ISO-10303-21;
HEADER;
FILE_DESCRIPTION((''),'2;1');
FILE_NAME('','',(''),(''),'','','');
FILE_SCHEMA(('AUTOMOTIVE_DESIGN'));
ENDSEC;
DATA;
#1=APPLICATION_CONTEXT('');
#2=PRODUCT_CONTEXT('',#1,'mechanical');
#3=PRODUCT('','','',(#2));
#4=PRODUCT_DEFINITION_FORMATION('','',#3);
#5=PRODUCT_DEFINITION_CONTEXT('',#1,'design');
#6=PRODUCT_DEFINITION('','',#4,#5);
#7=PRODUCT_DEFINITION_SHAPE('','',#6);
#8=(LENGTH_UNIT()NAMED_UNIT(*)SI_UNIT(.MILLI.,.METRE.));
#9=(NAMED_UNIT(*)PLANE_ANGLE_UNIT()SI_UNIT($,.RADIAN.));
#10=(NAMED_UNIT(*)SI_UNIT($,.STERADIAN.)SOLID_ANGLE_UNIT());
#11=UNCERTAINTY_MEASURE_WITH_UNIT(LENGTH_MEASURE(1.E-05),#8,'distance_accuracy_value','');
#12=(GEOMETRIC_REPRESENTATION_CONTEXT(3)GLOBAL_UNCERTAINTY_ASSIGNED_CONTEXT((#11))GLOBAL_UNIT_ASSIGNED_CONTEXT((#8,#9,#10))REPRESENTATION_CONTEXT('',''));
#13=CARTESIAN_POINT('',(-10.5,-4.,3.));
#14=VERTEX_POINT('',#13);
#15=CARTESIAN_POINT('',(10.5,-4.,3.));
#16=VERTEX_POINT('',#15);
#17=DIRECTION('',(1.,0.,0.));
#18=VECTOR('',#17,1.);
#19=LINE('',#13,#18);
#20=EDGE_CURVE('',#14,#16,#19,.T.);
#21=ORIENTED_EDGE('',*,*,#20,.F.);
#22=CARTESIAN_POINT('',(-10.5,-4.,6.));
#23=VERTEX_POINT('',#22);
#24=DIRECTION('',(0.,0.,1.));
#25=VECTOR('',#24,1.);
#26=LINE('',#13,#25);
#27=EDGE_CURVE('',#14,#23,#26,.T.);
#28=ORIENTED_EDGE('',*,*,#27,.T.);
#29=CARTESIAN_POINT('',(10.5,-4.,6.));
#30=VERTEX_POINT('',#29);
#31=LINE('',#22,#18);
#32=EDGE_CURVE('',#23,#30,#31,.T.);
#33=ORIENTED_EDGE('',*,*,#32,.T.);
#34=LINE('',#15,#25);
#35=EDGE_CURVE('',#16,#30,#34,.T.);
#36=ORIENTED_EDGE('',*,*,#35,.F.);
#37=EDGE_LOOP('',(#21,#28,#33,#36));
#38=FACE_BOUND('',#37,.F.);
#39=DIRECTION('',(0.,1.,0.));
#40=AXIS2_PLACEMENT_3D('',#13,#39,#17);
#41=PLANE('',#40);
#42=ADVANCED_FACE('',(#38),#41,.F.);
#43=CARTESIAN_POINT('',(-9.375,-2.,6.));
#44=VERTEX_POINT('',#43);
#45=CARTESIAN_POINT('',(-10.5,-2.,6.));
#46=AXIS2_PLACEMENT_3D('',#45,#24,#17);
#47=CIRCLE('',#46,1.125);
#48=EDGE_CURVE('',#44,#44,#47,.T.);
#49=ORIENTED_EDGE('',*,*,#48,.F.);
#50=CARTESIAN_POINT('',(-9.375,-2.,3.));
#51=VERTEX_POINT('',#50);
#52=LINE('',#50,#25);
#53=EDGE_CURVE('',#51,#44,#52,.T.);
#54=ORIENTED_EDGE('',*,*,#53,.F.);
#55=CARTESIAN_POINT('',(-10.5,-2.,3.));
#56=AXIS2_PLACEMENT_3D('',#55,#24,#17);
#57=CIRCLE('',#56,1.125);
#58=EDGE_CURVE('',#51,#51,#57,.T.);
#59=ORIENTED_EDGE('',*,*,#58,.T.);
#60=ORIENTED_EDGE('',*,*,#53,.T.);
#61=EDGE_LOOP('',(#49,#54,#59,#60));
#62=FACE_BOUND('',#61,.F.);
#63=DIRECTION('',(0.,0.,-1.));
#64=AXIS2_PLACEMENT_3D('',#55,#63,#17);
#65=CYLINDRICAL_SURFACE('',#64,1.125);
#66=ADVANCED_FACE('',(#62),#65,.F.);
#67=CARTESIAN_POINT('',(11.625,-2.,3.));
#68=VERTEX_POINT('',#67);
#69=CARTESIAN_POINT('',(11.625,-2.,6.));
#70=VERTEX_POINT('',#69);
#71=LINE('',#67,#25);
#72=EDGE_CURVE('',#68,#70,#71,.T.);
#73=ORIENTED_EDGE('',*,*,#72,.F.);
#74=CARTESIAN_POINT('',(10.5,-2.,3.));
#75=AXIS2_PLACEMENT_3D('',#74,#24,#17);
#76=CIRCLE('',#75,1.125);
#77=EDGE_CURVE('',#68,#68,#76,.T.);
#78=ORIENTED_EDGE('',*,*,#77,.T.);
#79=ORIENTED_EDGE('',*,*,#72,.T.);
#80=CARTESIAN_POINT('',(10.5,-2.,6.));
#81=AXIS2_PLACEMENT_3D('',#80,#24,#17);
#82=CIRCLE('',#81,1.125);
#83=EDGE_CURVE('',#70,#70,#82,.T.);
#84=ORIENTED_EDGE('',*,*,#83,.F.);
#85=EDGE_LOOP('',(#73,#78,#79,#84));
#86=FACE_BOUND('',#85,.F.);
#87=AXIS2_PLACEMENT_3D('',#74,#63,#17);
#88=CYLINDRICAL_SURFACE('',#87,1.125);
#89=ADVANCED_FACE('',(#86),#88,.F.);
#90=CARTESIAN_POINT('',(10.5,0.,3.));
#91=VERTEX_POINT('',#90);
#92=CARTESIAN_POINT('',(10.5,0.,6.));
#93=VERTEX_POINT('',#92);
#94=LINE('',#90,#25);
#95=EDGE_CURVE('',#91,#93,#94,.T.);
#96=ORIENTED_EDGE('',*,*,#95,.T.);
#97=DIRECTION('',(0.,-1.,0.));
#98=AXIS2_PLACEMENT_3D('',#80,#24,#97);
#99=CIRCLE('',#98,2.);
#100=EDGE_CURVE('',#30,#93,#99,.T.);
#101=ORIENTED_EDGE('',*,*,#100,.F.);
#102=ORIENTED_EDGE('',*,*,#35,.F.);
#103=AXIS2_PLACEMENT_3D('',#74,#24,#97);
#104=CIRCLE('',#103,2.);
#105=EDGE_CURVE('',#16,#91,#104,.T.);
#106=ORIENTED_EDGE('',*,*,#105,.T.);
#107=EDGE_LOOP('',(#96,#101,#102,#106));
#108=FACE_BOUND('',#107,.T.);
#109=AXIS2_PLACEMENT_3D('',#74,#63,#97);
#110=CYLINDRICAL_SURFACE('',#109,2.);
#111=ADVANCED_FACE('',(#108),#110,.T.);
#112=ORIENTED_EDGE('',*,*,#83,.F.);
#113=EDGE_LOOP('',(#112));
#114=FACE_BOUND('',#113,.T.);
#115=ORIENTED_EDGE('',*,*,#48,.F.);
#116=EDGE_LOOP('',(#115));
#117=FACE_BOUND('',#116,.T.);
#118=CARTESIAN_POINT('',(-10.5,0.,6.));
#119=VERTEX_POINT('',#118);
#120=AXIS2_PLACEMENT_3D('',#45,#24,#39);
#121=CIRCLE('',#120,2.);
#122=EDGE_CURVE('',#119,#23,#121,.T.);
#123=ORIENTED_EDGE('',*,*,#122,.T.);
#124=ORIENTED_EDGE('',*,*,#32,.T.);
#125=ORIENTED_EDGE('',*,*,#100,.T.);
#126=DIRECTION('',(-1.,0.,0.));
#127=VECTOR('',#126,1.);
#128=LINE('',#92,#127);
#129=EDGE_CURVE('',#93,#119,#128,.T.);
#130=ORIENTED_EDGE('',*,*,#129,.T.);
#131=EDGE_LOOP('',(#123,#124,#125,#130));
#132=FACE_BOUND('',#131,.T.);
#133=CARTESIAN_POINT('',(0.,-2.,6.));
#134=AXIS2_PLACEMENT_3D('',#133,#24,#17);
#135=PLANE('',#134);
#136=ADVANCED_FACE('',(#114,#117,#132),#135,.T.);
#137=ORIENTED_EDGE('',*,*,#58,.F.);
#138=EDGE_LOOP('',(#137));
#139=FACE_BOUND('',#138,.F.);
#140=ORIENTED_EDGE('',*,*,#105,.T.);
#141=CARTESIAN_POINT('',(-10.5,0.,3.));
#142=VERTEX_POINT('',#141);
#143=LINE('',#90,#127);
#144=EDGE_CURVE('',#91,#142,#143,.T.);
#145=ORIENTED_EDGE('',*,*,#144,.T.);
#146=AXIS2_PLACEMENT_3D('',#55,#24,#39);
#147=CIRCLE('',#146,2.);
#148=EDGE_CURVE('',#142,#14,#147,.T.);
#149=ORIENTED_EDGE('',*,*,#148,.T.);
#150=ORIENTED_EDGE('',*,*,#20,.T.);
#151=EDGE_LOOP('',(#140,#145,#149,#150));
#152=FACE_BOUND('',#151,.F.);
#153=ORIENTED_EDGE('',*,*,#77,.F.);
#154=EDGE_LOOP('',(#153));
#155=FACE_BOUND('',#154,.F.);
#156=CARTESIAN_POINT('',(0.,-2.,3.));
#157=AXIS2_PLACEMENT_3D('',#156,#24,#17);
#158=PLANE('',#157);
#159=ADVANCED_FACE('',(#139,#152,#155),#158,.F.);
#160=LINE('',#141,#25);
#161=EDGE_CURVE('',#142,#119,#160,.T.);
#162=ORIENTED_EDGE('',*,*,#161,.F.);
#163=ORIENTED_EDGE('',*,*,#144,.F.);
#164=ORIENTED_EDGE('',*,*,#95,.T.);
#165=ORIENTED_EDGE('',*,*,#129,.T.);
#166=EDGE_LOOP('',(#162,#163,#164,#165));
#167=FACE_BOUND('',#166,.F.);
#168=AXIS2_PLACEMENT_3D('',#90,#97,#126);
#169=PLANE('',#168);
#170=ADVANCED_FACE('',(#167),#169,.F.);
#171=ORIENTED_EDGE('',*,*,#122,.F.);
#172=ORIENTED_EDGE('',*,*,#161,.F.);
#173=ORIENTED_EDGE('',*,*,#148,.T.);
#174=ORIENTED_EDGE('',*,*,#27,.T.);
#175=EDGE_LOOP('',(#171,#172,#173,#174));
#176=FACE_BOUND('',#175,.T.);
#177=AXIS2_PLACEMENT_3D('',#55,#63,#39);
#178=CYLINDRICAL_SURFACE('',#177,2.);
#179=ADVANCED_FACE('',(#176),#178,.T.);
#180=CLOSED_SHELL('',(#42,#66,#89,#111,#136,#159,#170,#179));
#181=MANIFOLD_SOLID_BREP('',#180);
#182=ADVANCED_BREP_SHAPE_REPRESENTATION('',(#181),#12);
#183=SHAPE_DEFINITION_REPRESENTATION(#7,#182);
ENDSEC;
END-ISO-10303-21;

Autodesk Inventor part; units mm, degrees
ref_plane "YZ Plane" through (0, 0, 0) normal (1, 0, 0) x (0, 1, 0)
ref_plane "XZ Plane" through (0, 0, 0) normal (0, 1, 0) x (-1, 0, 0)
ref_plane "XY Plane" through (0, 0, 0) normal (0, 0, 1) x (1, 0, 0)
sketch "Sketch1" plane through (0, 0, 0) normal (0, 0, 1) x (1, 0, 0)
  circle A0 centre (21, 0) radius 2.25 projected
  circle A1 centre (-21, 0) radius 2.25 projected
  line L0 (21, 0) -> (-21, 0) construction
  line L1 (21, 4) -> (-21, 4)
  line L2 (-21, -4) -> (21, -4)
  arc A2 (21, -4) -> (21, 4) centre (21, 0) ccw
  arc A3 (-21, 4) -> (-21, -4) centre (-21, 0) ccw
  point P0 (0, 0)
  point P1 (0, 0)
  dimension "d0" = 8
extrude "Extrusion1" add sketch "Sketch1" along normal blind 6
scale "Scale1" factors (0.5, 0.5, 0.5) then translate (0, -2, 3) bodies 1
properties part number "MassiveToe2"
